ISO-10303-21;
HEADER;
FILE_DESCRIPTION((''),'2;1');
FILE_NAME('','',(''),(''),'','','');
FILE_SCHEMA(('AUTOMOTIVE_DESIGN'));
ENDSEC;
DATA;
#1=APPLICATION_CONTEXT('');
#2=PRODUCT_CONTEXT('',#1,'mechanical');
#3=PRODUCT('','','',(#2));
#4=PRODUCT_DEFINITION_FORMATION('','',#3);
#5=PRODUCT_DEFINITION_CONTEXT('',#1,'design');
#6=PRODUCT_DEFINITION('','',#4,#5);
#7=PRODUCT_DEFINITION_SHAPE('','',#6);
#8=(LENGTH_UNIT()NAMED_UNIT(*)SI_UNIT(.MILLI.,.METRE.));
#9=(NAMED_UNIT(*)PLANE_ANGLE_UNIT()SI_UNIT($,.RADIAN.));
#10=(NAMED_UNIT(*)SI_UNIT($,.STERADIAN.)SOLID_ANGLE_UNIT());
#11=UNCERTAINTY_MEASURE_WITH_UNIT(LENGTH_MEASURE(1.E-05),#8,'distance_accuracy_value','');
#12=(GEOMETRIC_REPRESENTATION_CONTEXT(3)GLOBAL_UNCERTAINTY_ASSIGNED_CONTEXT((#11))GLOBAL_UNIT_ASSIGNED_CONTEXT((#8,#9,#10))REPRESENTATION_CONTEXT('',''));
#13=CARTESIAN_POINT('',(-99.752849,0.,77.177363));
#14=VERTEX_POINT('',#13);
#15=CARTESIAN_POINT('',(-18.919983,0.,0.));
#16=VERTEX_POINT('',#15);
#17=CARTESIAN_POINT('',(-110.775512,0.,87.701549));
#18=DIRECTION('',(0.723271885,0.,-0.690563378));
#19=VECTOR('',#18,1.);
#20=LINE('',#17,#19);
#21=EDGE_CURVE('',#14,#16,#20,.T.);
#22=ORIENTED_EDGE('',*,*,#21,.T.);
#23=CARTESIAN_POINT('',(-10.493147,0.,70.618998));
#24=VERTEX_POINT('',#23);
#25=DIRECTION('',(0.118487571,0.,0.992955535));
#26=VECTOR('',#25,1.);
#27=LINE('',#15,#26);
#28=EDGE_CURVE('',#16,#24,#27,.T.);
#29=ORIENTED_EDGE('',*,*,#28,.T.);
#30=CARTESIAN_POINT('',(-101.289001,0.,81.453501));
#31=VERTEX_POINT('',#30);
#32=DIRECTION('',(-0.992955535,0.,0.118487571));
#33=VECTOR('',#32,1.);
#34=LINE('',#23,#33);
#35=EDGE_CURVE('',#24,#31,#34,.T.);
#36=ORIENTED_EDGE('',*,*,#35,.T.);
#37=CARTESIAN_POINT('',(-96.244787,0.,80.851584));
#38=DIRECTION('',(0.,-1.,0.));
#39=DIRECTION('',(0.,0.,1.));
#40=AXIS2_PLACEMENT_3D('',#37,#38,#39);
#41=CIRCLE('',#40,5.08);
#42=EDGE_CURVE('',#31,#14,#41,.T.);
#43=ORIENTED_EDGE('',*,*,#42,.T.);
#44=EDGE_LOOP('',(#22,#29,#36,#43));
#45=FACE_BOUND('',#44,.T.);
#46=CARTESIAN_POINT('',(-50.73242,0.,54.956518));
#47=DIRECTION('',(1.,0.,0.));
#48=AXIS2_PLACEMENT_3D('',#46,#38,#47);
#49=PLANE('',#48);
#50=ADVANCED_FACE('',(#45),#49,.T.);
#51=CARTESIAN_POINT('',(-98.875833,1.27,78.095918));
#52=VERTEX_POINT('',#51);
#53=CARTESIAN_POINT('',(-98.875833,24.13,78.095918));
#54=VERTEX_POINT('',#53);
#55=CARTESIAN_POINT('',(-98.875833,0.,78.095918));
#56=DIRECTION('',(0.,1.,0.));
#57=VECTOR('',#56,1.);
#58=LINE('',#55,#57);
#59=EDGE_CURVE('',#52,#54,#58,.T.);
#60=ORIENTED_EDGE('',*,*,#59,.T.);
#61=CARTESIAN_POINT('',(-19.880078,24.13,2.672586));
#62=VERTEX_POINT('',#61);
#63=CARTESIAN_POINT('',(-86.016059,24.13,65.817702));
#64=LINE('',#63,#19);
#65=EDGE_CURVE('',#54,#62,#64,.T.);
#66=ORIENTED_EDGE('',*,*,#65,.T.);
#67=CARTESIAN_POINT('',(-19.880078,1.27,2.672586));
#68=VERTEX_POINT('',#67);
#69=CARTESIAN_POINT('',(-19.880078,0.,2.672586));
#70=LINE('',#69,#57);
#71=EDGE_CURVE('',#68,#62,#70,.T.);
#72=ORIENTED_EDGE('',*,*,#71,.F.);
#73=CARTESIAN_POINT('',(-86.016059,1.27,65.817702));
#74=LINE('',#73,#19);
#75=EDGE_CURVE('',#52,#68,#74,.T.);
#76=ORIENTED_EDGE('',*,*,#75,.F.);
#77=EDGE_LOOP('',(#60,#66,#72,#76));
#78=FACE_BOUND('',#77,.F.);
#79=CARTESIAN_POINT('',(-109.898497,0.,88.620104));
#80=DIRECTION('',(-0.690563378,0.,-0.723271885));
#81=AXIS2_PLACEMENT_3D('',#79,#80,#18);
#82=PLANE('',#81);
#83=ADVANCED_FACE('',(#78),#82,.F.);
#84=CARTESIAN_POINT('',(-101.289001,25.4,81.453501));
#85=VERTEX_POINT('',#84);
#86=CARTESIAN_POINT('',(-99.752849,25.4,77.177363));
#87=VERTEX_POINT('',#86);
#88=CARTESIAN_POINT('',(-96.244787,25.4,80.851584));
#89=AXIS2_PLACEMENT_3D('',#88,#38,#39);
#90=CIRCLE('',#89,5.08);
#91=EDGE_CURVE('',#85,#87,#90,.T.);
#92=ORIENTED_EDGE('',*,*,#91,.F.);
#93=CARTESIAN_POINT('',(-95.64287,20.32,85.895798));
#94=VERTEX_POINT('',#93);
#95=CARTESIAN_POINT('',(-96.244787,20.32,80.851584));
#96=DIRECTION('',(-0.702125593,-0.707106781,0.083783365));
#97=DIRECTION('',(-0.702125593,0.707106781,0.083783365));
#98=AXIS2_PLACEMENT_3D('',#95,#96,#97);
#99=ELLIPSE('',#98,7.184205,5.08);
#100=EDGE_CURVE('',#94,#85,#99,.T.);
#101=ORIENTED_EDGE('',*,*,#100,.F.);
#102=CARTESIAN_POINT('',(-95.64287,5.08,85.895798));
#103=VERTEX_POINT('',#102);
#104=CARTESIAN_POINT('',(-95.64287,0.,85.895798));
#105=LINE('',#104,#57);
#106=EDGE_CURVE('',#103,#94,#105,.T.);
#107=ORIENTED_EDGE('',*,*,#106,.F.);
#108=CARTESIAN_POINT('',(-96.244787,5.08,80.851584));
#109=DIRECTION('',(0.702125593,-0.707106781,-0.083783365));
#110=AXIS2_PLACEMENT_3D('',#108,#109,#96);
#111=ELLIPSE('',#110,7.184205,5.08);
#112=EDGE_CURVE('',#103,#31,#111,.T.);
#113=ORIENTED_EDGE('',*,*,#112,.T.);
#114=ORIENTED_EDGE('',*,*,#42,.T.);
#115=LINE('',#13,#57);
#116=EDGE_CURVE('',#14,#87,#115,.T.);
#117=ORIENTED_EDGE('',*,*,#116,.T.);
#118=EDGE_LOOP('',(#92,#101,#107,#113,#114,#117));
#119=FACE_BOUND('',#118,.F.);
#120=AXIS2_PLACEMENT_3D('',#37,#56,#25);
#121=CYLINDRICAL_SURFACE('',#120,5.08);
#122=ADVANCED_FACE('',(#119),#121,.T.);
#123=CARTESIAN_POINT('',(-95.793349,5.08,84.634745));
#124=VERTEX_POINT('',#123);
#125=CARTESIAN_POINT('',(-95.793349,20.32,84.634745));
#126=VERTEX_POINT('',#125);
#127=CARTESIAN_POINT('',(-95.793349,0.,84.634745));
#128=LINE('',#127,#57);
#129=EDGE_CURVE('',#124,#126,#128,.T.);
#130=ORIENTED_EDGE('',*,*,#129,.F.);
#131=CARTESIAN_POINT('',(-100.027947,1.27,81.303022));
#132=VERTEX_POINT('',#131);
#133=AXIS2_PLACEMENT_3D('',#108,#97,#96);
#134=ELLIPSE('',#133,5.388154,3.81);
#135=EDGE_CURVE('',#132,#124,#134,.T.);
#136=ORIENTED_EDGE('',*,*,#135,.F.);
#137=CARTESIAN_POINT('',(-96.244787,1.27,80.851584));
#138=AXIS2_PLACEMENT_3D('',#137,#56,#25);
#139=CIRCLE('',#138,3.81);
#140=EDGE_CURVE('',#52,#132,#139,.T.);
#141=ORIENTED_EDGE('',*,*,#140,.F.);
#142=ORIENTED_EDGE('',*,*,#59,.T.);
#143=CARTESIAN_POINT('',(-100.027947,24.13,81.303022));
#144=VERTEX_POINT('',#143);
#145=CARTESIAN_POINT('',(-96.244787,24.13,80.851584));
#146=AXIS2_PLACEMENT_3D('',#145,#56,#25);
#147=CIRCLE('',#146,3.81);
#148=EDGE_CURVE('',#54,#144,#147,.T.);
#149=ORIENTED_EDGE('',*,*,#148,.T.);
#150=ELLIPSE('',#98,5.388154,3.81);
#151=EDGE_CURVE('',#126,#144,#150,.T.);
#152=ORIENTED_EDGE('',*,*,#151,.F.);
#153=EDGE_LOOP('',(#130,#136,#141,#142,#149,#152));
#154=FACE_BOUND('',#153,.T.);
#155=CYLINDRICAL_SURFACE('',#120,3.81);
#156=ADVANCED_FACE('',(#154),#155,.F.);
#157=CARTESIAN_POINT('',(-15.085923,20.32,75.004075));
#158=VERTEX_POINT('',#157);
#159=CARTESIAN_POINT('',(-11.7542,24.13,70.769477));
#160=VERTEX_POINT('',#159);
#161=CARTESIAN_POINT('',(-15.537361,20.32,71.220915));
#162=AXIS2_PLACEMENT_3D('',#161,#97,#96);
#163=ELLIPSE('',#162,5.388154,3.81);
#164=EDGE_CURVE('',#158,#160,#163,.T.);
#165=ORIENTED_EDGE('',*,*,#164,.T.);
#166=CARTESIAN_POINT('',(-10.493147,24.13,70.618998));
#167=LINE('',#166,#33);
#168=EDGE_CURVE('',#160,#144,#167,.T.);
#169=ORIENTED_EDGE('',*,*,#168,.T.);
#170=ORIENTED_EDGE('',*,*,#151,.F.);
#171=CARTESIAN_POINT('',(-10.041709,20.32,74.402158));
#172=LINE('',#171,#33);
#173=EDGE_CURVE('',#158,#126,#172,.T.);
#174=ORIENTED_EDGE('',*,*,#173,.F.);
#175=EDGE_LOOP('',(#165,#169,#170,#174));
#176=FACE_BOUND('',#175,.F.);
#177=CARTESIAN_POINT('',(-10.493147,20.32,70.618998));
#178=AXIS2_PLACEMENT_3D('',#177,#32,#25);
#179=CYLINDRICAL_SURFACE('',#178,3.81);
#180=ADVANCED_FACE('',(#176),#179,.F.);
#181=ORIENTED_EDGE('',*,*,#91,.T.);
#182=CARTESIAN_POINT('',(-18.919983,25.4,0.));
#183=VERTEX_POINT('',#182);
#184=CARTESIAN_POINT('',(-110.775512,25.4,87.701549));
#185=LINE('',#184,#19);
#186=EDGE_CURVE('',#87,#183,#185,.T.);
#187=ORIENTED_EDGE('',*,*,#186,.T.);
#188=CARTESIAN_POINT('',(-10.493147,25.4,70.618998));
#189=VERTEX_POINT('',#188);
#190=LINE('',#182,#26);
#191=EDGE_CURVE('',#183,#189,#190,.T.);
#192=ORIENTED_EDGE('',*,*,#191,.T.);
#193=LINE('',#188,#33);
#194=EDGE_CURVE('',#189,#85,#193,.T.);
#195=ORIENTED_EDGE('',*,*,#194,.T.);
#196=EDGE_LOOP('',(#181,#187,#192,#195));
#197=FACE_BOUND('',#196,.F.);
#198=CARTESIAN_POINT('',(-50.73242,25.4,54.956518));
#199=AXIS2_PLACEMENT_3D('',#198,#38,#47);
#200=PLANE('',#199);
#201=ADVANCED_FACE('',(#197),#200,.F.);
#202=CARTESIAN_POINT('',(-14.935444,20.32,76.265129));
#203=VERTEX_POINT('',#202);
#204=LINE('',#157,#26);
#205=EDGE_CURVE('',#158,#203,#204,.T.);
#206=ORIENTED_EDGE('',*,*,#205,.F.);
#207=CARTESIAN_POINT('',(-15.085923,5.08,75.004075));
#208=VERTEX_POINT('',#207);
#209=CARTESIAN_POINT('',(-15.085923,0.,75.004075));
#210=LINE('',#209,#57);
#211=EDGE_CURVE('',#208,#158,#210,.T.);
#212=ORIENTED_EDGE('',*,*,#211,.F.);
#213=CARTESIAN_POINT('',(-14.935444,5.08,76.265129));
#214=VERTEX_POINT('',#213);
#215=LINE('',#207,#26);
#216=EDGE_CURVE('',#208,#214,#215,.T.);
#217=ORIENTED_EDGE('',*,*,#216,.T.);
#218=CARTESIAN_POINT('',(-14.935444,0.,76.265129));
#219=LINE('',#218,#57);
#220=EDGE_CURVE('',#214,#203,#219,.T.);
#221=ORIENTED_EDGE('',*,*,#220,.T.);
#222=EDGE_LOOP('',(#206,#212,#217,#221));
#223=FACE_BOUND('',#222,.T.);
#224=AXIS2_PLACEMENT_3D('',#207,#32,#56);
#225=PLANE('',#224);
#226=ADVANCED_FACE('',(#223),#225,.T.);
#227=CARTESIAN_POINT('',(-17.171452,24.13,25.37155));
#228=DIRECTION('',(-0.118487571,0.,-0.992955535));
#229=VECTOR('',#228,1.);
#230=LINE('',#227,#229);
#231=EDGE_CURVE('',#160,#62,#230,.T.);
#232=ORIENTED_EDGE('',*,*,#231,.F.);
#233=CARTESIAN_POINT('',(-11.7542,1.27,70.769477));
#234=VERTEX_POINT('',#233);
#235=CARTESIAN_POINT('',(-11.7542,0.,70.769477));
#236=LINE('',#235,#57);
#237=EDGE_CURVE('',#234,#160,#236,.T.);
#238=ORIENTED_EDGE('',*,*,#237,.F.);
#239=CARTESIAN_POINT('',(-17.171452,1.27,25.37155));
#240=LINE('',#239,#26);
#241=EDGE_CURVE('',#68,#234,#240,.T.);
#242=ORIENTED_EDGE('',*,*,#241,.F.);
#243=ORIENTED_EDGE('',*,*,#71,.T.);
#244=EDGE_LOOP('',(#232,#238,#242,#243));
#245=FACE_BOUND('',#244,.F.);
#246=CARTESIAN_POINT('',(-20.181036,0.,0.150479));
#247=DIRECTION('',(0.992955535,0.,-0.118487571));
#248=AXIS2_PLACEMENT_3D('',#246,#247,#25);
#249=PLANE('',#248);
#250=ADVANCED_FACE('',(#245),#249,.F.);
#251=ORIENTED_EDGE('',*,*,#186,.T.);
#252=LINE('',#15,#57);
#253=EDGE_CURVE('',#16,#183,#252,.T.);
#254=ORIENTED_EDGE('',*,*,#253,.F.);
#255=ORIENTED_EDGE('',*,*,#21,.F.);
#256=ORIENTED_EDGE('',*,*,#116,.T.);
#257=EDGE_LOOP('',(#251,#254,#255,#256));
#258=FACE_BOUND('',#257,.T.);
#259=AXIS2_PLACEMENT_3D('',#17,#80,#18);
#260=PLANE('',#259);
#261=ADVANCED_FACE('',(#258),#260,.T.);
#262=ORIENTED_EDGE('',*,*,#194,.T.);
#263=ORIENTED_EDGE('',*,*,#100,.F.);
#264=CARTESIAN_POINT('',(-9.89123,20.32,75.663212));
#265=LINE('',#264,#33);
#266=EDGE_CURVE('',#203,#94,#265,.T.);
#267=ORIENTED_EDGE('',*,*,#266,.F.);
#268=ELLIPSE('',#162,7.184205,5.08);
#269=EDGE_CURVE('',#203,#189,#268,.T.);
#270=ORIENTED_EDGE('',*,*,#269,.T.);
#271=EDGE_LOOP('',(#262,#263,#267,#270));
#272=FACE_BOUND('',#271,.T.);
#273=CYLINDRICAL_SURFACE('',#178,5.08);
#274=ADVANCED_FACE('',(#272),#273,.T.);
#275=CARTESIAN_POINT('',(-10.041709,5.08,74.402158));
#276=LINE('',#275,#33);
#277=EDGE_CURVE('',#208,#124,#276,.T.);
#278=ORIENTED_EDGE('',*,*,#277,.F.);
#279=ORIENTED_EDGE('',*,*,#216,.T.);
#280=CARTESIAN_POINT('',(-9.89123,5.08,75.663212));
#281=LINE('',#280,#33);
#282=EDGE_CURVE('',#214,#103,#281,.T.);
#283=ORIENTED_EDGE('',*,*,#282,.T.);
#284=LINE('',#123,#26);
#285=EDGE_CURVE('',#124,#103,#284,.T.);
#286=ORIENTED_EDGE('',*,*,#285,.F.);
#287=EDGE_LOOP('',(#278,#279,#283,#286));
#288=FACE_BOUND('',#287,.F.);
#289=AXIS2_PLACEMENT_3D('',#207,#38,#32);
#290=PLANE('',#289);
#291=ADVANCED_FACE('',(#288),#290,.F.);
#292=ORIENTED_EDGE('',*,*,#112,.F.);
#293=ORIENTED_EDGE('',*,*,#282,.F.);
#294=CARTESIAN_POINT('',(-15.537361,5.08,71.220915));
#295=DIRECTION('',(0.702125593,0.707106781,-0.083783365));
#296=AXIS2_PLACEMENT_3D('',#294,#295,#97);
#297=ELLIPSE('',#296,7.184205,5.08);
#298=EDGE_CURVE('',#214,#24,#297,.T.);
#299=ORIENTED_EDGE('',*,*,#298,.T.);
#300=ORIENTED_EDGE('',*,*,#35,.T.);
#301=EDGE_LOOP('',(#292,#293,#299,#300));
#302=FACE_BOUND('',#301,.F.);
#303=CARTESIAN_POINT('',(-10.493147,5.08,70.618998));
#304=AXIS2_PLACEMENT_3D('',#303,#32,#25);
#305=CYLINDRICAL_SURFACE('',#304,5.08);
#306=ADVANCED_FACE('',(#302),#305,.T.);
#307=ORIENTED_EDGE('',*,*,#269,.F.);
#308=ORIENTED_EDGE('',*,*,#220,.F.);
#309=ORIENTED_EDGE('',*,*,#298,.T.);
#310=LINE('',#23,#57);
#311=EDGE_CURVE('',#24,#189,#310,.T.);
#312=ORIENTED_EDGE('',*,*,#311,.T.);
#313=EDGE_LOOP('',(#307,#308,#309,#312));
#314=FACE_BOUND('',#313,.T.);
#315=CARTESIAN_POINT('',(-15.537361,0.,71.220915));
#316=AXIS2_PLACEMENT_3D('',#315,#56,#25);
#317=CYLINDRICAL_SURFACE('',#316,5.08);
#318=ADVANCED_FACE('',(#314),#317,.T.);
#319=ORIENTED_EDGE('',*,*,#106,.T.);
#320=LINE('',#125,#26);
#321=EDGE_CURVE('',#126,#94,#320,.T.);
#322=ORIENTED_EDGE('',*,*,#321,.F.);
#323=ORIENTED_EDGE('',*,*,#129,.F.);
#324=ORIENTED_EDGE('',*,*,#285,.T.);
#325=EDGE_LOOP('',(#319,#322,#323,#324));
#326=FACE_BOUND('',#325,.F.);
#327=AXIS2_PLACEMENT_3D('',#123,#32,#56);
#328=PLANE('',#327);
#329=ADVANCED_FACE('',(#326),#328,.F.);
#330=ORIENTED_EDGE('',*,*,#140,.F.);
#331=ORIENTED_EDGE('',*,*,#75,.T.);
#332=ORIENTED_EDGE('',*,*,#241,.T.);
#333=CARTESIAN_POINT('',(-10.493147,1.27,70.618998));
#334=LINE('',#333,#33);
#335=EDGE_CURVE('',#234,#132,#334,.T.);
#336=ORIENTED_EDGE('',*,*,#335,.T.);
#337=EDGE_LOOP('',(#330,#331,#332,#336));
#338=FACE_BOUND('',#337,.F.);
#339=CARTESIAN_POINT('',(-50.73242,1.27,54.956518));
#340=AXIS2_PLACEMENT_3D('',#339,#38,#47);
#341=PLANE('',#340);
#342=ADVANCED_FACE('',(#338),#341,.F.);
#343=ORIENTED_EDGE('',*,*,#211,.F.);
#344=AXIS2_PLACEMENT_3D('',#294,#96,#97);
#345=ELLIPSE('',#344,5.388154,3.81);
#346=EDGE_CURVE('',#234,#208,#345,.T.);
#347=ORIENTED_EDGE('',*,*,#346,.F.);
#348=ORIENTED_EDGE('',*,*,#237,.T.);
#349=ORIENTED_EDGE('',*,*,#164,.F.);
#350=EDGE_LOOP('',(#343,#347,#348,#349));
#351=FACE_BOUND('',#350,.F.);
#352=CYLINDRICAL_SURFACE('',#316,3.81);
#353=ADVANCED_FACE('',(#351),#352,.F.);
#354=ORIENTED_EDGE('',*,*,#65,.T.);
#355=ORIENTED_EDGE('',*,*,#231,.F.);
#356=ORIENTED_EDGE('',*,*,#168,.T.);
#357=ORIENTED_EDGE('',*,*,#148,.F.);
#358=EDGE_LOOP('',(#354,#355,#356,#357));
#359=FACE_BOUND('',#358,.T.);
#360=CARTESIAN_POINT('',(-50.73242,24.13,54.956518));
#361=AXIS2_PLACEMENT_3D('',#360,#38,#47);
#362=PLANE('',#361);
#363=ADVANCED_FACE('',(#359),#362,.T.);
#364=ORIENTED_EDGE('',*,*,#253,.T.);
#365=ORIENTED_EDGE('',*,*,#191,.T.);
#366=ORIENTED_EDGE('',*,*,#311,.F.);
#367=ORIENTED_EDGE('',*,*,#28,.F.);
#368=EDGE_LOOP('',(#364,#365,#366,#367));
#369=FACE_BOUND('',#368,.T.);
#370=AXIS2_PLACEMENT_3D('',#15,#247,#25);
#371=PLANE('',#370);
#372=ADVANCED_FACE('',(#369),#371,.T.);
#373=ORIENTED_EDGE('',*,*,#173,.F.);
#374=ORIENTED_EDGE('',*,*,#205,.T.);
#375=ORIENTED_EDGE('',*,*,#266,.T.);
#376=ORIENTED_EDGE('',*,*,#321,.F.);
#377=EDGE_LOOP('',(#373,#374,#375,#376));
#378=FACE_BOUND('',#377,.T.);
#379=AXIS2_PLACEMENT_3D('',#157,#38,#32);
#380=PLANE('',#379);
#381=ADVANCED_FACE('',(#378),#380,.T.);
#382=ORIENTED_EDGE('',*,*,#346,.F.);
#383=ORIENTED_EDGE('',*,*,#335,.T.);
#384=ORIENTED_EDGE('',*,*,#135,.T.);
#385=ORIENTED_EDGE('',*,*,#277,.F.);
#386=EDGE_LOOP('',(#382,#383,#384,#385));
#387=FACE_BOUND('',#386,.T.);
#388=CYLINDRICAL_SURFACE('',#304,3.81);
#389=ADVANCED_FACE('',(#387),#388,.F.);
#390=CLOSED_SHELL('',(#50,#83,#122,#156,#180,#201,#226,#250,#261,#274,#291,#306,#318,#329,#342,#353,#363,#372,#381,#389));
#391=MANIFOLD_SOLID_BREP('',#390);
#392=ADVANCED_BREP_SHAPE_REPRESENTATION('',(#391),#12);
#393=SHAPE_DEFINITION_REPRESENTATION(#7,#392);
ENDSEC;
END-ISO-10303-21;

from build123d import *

# Parameters (mm, degrees)
F1_DEPTH = 25.4
F2_R     = 5.08
F3_T     = -1.27


# Not quite as in the source:
# - a shell that OpenCascade refuses in one call is made with other operations: the cavity is built on its own and cut out


with BuildPart() as f1:
    # F0 (on Front) → F1 (new body)
    with BuildSketch(Plane.XZ):
        Polygon((-9.891229794, 75.6632118021), (-110.7755121968, 87.7015490657), (-18.9199827418, 0), align=None)
    extrude(amount=-F1_DEPTH)

    # F2
    f2_edges = [f1.edges().sort_by_distance(p)[0] for p in [
        (-60.333371, 0, 81.68238),
        (-110.775512, 12.7, 87.701549),
        (-60.333371, 25.4, 81.68238),
        (-9.89123, 12.7, 75.663212),
    ]]
    fillet(f2_edges, radius=F2_R)

    # F3: a shell. OpenCascade refuses it in one call, so the cavity is built on its own and cut out:
    # the body offset inwards by the wall thickness, plus a prism from it out through each open face.
    f3_core = offset(f1.part, amount=F3_T, mode=Mode.PRIVATE)
    f3_exits = [f3_core.faces().sort_by_distance(p)[0] for p in [
        (-55.439636, 12.7, 79.81941),
    ]]
    add(f3_core, mode=Mode.SUBTRACT)
    extrude(f3_exits, amount=-F3_T, mode=Mode.SUBTRACT)


solid = f1.part
